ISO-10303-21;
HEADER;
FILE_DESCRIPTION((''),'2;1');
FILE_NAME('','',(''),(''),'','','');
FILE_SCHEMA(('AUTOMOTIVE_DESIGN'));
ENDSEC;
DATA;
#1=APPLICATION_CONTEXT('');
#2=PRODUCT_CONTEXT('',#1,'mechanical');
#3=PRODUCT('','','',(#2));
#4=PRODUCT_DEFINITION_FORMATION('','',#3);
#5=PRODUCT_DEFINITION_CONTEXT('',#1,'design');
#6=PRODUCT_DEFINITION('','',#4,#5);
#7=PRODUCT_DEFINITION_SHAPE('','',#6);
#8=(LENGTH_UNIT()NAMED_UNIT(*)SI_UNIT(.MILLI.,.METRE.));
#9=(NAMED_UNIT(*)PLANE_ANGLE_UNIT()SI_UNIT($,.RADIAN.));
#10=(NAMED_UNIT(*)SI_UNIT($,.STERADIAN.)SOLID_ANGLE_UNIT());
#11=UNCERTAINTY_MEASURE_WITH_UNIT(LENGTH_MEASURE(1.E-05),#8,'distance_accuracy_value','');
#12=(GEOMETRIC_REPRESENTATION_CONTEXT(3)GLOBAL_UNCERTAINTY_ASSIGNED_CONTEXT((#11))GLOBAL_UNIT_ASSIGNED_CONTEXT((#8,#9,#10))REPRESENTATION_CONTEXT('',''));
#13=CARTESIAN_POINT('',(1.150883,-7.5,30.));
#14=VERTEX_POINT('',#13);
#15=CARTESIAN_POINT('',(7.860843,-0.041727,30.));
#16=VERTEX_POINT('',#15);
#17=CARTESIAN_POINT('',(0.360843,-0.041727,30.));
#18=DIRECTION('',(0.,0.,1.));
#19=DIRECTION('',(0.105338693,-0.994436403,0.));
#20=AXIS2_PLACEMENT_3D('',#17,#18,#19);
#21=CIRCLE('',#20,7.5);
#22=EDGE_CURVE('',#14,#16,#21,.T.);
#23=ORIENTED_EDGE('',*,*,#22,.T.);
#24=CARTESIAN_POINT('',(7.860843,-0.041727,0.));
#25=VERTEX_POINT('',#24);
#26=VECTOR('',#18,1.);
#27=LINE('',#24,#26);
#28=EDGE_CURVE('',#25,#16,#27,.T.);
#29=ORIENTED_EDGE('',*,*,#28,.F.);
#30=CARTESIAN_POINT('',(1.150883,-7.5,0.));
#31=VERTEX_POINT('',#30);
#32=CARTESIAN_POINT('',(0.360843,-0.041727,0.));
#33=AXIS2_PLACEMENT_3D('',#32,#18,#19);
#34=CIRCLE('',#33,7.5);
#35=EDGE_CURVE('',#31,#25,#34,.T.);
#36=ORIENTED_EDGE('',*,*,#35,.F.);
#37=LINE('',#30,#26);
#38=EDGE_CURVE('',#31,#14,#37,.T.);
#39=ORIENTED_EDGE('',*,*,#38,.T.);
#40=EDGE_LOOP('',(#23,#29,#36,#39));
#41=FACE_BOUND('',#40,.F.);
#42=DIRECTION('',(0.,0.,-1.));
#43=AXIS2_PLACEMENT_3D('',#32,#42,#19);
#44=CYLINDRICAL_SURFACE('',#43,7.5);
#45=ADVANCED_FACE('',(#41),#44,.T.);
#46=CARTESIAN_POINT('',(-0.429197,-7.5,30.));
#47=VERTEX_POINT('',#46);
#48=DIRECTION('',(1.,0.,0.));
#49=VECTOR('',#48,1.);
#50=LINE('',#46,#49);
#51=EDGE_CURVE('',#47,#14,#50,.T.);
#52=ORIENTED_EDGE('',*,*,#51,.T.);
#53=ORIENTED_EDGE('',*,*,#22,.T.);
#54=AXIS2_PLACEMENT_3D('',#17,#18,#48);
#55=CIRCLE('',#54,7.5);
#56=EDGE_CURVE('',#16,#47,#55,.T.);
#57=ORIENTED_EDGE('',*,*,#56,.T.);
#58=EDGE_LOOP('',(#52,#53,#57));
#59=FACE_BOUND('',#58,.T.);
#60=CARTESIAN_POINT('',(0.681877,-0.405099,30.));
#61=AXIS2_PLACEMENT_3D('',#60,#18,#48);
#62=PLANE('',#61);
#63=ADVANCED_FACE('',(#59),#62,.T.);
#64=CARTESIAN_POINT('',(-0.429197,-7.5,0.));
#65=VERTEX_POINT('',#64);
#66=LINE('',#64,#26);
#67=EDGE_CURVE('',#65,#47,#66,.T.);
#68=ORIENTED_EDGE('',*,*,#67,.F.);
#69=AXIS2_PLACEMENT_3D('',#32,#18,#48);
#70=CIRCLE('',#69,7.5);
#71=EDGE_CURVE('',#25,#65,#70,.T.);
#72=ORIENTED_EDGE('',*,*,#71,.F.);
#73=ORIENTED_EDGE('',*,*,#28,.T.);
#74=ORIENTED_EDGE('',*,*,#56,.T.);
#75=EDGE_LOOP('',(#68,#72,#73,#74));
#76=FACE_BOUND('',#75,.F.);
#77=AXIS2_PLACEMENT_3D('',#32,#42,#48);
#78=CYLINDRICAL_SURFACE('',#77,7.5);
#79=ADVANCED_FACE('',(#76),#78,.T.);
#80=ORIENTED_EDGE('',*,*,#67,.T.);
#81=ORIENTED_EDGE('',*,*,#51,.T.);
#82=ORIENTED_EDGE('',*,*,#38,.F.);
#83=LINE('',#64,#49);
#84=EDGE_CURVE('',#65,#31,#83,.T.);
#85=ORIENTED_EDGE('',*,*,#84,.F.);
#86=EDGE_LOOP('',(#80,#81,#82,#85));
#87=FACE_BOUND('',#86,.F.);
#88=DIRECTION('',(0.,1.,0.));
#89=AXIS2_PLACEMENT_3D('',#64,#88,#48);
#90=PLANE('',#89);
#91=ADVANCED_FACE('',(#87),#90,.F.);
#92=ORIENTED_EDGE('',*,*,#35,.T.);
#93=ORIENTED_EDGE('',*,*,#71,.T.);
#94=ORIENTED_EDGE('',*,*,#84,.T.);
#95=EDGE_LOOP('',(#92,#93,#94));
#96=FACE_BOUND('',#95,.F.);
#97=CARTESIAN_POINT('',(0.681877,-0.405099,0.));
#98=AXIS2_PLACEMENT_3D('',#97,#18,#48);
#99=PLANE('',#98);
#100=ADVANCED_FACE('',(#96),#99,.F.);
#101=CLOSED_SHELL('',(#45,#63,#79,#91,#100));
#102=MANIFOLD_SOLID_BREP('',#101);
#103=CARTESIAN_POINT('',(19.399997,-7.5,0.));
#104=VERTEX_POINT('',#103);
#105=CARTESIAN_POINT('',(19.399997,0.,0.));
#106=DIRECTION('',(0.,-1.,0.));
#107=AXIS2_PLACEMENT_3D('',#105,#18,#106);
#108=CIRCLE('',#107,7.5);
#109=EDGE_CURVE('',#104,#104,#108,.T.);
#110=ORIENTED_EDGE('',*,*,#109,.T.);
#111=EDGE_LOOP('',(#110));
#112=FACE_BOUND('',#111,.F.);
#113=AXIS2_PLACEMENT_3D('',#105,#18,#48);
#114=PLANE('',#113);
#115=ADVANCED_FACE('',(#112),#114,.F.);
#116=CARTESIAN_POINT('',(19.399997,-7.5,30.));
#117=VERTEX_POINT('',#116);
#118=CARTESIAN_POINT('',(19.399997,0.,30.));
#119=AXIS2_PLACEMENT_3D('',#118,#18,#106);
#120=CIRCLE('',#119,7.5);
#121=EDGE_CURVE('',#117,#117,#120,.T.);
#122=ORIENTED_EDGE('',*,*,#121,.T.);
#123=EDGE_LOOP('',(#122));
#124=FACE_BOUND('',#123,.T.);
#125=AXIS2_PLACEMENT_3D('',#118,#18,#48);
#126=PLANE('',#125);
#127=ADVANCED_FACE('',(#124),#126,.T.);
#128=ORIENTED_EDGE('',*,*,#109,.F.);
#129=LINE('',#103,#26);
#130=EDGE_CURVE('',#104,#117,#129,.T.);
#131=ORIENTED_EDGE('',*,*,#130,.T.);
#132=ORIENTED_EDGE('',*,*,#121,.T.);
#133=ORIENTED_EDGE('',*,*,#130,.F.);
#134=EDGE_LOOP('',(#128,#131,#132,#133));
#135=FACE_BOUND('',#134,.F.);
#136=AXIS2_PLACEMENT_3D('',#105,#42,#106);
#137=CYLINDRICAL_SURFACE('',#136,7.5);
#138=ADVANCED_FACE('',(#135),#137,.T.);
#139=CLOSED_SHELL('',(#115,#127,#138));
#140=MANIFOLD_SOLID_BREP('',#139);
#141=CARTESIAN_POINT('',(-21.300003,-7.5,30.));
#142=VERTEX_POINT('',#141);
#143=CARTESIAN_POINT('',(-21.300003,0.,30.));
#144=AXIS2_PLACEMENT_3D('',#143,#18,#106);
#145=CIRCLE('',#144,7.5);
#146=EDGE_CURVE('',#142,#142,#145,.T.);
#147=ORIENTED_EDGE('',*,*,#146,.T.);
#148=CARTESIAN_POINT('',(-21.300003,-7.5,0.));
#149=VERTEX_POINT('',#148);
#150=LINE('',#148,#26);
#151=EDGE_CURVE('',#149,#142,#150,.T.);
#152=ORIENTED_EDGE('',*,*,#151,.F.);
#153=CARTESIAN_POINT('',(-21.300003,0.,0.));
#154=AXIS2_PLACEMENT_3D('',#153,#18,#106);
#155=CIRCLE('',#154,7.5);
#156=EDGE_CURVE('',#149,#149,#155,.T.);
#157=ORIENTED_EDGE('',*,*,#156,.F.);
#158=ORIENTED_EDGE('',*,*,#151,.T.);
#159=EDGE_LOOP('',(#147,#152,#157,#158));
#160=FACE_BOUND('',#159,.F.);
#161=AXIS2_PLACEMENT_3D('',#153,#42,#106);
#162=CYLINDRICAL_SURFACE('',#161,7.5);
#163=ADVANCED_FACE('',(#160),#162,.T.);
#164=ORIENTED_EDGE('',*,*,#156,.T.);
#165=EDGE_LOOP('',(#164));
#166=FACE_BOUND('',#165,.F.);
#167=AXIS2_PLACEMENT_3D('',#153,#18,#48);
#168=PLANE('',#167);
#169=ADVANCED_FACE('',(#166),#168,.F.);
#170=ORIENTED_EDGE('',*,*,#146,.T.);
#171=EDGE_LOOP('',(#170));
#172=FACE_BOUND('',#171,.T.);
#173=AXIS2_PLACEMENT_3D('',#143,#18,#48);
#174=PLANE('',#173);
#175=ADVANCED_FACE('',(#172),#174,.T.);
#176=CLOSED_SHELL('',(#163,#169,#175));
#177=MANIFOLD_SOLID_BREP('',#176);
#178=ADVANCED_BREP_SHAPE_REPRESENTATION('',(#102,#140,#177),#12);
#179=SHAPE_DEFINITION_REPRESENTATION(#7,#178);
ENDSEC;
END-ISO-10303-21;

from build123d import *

# Parameters (mm, degrees)
F1_DEPTH = 30


# Not quite as in the source:
# - the program builds the solid bodies; features that only make, move or delete a surface that nothing else refers to are left out


with BuildPart() as f1:
    # F0 (on Top) → F1 (new body)
    with BuildSketch(Plane.XY):
        with BuildLine():
            ThreePointArc((26.8999968469, 0), (24.7032977058, 5.3033008589), (19.3999968469, 7.5))
            ThreePointArc((19.3999968469, 7.5), (11.8999968469, 0), (19.3999968469, -7.5))
            ThreePointArc((19.3999968469, -7.5), (24.7032977058, -5.3033008589), (26.8999968469, 0))
        make_face()
    extrude(amount=F1_DEPTH)


with BuildPart() as f1b:
    # F0 (on Top) → F1, piece 2 (new body)
    with BuildSketch(Plane.XY):
        with BuildLine():
            ThreePointArc((-13.8000029325, 0), (-15.9967020736, 5.3033008589), (-21.3000029325, 7.5))
            ThreePointArc((-21.3000029325, 7.5), (-28.8000029325, 0), (-21.3000029325, -7.5))
            ThreePointArc((-21.3000029325, -7.5), (-15.9967020736, -5.3033008589), (-13.8000029325, 0))
        make_face()
    extrude(amount=F1_DEPTH)


with BuildPart() as f1c:
    # F0 (on Top) → F1, piece 3 (new body)
    with BuildSketch(Plane.XY):
        with BuildLine():
            Line((-0.4291974003, -7.5), (1.1508829887, -7.5))
            ThreePointArc((1.1508829887, -7.5), (5.9364728688, -5.0579356316), (7.8608427942, -0.0417269766))
            ThreePointArc((7.8608427942, -0.0417269766), (-4.6553658608, 5.533903098), (-0.4291974003, -7.5))
        make_face()
    extrude(amount=F1_DEPTH)


solid = Compound([f1.part, f1b.part, f1c.part])
